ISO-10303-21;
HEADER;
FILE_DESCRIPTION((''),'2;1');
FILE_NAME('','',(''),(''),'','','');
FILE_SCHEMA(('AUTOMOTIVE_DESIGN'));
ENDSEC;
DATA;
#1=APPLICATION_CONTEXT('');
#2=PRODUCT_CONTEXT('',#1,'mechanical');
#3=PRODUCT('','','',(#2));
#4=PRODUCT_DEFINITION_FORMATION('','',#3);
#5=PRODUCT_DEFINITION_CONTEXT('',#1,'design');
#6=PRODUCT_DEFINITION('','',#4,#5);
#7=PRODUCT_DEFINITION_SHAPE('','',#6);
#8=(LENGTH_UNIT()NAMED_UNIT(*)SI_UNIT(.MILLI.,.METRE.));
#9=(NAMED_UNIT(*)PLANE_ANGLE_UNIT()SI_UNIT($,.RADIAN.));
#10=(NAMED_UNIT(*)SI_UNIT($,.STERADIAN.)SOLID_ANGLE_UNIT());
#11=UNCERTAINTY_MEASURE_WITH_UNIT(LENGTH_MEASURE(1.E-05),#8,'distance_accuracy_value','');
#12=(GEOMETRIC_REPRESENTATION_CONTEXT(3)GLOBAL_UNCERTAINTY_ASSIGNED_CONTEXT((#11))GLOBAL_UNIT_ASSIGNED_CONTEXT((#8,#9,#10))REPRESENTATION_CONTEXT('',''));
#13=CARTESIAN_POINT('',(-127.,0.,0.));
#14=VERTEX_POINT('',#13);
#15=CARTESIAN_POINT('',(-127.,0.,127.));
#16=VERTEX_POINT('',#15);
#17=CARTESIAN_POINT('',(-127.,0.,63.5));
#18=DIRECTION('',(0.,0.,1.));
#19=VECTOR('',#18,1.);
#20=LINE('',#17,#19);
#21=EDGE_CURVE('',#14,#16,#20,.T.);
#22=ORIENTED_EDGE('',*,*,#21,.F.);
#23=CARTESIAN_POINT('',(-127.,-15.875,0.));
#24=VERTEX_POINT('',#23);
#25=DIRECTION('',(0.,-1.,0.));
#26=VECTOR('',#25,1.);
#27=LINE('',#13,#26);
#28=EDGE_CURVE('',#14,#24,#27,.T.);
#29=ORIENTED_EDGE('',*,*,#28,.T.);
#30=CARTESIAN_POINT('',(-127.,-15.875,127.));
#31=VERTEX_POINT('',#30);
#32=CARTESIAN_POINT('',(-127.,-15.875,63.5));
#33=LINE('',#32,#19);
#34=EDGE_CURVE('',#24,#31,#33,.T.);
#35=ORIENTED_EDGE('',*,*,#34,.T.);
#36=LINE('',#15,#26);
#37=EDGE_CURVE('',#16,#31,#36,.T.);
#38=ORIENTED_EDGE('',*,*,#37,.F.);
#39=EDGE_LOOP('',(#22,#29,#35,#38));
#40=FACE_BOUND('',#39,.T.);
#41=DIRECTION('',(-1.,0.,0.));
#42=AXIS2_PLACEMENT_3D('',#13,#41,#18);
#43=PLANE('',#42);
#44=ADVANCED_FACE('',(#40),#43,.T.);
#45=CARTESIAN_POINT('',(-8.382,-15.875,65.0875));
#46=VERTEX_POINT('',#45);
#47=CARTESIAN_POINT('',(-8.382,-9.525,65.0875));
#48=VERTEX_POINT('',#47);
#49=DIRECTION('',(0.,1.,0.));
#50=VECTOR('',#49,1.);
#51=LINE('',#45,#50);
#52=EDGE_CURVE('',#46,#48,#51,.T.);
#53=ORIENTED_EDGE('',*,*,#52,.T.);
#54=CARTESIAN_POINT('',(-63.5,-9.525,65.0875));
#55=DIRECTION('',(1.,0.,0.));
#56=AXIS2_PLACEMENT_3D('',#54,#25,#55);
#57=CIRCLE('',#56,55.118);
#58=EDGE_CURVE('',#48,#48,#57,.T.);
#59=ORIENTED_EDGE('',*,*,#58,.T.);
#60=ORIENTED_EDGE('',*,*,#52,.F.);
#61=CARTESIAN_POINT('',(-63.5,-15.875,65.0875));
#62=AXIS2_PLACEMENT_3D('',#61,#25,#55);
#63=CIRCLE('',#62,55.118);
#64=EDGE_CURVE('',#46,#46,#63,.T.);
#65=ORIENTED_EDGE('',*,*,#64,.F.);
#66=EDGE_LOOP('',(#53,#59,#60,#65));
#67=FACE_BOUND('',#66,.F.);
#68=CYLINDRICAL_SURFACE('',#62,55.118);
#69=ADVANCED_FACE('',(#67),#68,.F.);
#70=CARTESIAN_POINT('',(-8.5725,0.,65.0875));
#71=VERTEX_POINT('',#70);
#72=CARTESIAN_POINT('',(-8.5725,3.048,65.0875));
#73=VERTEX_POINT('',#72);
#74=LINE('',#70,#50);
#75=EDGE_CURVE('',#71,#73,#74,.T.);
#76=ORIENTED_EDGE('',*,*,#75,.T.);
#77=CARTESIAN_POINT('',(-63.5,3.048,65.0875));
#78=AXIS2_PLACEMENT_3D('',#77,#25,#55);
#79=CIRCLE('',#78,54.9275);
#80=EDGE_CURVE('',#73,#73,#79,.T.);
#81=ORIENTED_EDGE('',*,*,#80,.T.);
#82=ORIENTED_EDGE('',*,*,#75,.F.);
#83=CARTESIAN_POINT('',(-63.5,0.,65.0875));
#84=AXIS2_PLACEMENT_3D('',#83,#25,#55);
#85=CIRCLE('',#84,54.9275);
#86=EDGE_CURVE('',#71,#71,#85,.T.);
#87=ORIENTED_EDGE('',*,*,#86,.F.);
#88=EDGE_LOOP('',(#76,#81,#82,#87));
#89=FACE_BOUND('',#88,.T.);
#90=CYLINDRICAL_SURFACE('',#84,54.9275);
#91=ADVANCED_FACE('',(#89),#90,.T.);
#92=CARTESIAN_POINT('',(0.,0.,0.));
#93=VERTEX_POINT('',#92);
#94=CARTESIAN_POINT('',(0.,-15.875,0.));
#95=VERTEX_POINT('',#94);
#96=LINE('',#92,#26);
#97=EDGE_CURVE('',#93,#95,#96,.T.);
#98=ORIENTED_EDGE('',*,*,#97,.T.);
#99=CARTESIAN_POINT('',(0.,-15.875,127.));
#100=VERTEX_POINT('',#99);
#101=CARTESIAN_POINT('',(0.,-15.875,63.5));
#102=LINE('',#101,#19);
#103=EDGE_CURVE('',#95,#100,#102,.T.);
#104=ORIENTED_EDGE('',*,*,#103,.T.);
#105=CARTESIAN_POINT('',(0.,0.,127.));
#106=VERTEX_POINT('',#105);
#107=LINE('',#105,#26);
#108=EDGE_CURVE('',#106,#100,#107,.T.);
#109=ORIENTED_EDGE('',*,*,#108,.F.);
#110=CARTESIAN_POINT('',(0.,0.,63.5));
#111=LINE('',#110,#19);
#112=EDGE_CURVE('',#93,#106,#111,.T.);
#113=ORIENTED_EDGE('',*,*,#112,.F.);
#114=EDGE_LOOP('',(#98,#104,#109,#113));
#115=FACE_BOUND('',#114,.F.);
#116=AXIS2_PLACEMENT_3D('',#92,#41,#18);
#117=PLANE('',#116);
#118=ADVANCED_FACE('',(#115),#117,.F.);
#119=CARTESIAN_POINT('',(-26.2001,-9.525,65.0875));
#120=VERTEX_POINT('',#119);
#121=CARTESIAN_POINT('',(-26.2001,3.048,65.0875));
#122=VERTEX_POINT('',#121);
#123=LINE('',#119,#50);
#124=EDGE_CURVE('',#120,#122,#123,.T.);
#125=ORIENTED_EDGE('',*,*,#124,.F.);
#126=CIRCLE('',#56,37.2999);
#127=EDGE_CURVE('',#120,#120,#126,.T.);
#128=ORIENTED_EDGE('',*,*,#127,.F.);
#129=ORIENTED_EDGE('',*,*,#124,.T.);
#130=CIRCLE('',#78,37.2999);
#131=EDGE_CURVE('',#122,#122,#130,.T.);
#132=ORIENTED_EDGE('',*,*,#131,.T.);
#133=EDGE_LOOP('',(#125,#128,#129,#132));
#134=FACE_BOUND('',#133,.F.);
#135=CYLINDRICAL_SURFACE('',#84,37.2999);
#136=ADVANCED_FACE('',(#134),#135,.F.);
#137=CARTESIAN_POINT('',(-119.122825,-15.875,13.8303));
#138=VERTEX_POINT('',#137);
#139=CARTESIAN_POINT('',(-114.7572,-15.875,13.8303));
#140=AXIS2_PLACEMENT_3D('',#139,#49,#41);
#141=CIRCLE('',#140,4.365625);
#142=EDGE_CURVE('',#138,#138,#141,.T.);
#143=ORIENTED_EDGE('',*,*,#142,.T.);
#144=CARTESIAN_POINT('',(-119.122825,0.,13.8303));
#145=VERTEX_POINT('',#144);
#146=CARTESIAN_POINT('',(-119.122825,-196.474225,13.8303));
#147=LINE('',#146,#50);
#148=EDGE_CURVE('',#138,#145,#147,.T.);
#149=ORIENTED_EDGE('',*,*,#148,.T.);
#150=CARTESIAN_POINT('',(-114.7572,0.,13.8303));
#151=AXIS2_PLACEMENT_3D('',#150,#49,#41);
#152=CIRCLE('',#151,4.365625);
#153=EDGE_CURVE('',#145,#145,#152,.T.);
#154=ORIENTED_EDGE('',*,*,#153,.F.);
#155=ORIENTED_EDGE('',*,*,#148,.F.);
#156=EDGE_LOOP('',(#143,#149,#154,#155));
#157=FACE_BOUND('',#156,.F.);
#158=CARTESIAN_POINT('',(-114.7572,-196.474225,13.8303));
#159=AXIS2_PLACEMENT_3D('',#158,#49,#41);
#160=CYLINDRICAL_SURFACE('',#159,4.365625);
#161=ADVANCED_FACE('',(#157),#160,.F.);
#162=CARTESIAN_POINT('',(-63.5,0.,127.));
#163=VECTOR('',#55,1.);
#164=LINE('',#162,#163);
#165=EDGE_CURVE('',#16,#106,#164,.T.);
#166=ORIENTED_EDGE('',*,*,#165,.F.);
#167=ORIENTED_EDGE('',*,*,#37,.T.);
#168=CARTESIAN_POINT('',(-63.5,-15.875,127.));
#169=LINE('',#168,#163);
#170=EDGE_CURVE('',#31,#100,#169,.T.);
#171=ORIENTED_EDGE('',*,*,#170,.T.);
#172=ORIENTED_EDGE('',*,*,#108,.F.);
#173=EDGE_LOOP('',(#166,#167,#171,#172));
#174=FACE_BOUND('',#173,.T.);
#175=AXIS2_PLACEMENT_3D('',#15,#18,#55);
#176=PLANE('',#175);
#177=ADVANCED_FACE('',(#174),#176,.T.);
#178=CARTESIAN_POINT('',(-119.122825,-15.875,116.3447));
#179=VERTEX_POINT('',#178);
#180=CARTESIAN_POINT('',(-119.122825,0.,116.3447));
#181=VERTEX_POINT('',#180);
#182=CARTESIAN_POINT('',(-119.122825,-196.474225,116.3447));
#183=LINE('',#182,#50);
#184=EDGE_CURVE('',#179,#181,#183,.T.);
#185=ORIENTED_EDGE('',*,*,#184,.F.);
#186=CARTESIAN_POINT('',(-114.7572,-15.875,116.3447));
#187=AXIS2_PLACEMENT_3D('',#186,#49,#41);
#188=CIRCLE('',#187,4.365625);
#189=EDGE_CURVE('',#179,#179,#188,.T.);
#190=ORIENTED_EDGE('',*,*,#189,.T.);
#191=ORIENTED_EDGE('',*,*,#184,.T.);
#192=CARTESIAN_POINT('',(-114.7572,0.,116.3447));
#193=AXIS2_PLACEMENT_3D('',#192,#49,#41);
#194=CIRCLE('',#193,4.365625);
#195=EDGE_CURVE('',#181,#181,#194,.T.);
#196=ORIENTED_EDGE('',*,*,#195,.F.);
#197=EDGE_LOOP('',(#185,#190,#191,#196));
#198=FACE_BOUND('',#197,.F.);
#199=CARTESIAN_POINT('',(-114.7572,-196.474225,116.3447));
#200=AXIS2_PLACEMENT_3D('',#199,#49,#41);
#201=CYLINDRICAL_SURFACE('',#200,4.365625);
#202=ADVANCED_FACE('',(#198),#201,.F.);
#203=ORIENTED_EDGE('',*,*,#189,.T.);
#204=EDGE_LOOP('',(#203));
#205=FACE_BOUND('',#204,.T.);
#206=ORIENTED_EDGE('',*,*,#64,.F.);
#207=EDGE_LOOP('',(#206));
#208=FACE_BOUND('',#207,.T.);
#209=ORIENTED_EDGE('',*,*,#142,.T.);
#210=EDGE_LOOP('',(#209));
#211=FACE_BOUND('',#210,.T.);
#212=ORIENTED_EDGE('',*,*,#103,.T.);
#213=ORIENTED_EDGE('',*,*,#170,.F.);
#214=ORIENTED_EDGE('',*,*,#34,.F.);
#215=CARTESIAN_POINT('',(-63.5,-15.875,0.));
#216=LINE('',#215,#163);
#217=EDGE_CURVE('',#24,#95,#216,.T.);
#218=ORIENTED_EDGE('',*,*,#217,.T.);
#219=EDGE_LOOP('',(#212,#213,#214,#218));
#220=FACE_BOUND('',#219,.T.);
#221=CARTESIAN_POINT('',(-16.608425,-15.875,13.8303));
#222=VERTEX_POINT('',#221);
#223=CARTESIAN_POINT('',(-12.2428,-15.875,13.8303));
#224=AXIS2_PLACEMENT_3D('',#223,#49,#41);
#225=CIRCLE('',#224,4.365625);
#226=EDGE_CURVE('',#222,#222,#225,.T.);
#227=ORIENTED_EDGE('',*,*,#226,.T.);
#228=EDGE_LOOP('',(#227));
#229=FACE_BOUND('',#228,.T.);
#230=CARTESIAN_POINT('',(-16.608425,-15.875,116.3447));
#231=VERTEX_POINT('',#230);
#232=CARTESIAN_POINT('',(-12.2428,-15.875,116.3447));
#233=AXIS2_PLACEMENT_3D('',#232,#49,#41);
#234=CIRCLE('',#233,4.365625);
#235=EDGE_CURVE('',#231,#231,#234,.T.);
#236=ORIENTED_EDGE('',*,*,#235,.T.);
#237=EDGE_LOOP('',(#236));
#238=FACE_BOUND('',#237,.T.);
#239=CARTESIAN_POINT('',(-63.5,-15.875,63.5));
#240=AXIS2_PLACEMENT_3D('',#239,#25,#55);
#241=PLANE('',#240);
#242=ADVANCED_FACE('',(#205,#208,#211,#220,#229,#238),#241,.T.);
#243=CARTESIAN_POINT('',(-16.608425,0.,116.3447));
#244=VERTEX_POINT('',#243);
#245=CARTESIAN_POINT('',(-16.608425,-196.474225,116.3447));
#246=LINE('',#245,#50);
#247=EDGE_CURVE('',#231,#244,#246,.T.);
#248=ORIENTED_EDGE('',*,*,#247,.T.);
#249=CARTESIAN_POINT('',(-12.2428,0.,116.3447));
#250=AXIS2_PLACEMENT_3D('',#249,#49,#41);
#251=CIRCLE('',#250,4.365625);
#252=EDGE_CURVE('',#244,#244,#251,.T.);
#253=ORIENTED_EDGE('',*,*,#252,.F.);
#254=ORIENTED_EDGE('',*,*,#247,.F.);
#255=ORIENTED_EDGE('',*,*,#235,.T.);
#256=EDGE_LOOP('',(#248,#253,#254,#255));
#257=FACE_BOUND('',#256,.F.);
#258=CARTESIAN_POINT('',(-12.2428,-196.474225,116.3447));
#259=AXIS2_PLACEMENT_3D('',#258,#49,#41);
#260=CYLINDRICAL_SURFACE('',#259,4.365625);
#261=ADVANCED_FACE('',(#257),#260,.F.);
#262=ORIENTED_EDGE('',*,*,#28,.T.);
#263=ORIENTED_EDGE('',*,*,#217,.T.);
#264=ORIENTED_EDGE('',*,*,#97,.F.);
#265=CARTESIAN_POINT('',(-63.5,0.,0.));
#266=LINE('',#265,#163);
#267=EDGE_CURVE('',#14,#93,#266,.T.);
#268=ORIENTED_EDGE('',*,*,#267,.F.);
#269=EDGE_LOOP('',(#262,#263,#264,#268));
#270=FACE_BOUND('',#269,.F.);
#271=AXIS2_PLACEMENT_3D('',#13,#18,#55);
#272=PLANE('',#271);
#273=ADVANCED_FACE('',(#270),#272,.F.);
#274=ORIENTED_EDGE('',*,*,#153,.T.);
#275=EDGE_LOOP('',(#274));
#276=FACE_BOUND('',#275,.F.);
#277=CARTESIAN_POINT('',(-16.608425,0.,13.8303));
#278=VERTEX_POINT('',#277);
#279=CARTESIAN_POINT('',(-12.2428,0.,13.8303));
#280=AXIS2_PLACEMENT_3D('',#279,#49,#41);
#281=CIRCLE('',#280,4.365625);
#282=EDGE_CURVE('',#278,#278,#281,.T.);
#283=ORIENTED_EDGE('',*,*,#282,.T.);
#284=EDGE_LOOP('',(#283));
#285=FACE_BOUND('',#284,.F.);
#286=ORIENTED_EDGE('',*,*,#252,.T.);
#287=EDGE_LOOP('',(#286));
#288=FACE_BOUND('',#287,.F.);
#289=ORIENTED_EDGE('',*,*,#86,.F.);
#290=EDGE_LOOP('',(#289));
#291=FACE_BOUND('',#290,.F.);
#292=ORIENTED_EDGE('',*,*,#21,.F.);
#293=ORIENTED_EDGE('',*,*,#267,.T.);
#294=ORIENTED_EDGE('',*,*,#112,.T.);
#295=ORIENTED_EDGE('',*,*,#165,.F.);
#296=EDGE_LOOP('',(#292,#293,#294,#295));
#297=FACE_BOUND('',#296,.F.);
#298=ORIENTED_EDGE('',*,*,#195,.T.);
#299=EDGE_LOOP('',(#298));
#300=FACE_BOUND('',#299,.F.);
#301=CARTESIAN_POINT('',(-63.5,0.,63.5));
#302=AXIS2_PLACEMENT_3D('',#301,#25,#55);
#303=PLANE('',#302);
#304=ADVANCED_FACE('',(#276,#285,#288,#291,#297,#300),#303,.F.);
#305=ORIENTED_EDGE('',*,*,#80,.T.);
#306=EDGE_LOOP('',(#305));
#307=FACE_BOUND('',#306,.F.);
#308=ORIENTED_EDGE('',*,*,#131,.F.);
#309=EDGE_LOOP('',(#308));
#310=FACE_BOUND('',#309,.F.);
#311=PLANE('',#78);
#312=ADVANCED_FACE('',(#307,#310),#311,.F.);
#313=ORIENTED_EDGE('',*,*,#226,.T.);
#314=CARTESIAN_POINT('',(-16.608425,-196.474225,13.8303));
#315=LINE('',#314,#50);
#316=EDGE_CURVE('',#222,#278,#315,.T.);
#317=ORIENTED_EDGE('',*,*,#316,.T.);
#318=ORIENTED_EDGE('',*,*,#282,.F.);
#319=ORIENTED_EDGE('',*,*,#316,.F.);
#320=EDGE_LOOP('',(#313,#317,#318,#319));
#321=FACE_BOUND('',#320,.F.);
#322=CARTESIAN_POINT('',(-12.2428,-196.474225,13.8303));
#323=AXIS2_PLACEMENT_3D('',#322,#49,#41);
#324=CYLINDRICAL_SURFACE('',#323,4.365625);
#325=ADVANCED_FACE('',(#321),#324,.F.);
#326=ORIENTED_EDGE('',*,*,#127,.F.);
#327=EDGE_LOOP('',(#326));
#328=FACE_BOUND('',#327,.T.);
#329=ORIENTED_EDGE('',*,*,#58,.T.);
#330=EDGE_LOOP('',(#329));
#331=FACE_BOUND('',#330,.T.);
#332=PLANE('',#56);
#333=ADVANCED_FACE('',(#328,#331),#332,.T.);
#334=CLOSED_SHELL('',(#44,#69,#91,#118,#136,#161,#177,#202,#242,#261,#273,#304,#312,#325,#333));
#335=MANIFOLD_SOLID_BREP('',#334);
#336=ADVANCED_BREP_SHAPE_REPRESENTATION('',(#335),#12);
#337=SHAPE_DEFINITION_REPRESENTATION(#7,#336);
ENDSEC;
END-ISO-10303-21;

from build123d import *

# Parameters (mm, degrees)
F0_W     = 127
F0_H     = 127
F2_DEPTH = 15.875
F3_R     = 37.2999
F4_DEPTH = 16.002
F5_R     = 55.118
F5_R_2   = 37.2999
F6_DEPTH = 6.35
F7_R     = 54.9275
F7_R_2   = 37.2999
F8_DEPTH = 3.048
F10_D    = 8.73125


# Not quite as in the source:
# - a length typed as a fraction of an inch, garbled in the dataset ("3 / 203.2 mm" for 3/8 in), is restored


with BuildPart() as f2:
    # F0 (on Front) → F2 (new body)
    with BuildSketch(Plane.XZ):
        with Locations((-63.5, 63.5)):
            Rectangle(F0_W, F0_H)
    extrude(amount=F2_DEPTH)

    # F3 (on face) → F4 (cut)
    with BuildSketch(Plane.XZ.offset(15.875)):
        with Locations((-63.5, 65.0875)):
            Circle(F3_R)
    extrude(amount=-F4_DEPTH, mode=Mode.SUBTRACT)

    # F5 (on face) → F6 (cut)
    with BuildSketch(Plane.XZ.offset(15.875)):
        with Locations((-63.5, 65.0875)):
            Circle(F5_R)
        with Locations((-63.5, 65.0875)):
            Circle(F5_R_2, mode=Mode.SUBTRACT)
    extrude(amount=-F6_DEPTH, mode=Mode.SUBTRACT)

    # F7 (on face) → F8 (join)
    with BuildSketch(Plane.XZ):
        with Locations((-63.5, 65.0875)):
            Circle(F7_R)
        with Locations((-63.5, 65.0875)):
            Circle(F7_R_2, mode=Mode.SUBTRACT)
    extrude(amount=-F8_DEPTH)

    # F10 (through all)
    with Locations(Plane.XZ.offset(15.875)):
        with Locations((-114.7572, 116.3447), (-12.2428, 116.3447), (-12.2428, 13.8303), (-114.7572, 13.8303)):
            Hole(F10_D / 2)


solid = f2.part
